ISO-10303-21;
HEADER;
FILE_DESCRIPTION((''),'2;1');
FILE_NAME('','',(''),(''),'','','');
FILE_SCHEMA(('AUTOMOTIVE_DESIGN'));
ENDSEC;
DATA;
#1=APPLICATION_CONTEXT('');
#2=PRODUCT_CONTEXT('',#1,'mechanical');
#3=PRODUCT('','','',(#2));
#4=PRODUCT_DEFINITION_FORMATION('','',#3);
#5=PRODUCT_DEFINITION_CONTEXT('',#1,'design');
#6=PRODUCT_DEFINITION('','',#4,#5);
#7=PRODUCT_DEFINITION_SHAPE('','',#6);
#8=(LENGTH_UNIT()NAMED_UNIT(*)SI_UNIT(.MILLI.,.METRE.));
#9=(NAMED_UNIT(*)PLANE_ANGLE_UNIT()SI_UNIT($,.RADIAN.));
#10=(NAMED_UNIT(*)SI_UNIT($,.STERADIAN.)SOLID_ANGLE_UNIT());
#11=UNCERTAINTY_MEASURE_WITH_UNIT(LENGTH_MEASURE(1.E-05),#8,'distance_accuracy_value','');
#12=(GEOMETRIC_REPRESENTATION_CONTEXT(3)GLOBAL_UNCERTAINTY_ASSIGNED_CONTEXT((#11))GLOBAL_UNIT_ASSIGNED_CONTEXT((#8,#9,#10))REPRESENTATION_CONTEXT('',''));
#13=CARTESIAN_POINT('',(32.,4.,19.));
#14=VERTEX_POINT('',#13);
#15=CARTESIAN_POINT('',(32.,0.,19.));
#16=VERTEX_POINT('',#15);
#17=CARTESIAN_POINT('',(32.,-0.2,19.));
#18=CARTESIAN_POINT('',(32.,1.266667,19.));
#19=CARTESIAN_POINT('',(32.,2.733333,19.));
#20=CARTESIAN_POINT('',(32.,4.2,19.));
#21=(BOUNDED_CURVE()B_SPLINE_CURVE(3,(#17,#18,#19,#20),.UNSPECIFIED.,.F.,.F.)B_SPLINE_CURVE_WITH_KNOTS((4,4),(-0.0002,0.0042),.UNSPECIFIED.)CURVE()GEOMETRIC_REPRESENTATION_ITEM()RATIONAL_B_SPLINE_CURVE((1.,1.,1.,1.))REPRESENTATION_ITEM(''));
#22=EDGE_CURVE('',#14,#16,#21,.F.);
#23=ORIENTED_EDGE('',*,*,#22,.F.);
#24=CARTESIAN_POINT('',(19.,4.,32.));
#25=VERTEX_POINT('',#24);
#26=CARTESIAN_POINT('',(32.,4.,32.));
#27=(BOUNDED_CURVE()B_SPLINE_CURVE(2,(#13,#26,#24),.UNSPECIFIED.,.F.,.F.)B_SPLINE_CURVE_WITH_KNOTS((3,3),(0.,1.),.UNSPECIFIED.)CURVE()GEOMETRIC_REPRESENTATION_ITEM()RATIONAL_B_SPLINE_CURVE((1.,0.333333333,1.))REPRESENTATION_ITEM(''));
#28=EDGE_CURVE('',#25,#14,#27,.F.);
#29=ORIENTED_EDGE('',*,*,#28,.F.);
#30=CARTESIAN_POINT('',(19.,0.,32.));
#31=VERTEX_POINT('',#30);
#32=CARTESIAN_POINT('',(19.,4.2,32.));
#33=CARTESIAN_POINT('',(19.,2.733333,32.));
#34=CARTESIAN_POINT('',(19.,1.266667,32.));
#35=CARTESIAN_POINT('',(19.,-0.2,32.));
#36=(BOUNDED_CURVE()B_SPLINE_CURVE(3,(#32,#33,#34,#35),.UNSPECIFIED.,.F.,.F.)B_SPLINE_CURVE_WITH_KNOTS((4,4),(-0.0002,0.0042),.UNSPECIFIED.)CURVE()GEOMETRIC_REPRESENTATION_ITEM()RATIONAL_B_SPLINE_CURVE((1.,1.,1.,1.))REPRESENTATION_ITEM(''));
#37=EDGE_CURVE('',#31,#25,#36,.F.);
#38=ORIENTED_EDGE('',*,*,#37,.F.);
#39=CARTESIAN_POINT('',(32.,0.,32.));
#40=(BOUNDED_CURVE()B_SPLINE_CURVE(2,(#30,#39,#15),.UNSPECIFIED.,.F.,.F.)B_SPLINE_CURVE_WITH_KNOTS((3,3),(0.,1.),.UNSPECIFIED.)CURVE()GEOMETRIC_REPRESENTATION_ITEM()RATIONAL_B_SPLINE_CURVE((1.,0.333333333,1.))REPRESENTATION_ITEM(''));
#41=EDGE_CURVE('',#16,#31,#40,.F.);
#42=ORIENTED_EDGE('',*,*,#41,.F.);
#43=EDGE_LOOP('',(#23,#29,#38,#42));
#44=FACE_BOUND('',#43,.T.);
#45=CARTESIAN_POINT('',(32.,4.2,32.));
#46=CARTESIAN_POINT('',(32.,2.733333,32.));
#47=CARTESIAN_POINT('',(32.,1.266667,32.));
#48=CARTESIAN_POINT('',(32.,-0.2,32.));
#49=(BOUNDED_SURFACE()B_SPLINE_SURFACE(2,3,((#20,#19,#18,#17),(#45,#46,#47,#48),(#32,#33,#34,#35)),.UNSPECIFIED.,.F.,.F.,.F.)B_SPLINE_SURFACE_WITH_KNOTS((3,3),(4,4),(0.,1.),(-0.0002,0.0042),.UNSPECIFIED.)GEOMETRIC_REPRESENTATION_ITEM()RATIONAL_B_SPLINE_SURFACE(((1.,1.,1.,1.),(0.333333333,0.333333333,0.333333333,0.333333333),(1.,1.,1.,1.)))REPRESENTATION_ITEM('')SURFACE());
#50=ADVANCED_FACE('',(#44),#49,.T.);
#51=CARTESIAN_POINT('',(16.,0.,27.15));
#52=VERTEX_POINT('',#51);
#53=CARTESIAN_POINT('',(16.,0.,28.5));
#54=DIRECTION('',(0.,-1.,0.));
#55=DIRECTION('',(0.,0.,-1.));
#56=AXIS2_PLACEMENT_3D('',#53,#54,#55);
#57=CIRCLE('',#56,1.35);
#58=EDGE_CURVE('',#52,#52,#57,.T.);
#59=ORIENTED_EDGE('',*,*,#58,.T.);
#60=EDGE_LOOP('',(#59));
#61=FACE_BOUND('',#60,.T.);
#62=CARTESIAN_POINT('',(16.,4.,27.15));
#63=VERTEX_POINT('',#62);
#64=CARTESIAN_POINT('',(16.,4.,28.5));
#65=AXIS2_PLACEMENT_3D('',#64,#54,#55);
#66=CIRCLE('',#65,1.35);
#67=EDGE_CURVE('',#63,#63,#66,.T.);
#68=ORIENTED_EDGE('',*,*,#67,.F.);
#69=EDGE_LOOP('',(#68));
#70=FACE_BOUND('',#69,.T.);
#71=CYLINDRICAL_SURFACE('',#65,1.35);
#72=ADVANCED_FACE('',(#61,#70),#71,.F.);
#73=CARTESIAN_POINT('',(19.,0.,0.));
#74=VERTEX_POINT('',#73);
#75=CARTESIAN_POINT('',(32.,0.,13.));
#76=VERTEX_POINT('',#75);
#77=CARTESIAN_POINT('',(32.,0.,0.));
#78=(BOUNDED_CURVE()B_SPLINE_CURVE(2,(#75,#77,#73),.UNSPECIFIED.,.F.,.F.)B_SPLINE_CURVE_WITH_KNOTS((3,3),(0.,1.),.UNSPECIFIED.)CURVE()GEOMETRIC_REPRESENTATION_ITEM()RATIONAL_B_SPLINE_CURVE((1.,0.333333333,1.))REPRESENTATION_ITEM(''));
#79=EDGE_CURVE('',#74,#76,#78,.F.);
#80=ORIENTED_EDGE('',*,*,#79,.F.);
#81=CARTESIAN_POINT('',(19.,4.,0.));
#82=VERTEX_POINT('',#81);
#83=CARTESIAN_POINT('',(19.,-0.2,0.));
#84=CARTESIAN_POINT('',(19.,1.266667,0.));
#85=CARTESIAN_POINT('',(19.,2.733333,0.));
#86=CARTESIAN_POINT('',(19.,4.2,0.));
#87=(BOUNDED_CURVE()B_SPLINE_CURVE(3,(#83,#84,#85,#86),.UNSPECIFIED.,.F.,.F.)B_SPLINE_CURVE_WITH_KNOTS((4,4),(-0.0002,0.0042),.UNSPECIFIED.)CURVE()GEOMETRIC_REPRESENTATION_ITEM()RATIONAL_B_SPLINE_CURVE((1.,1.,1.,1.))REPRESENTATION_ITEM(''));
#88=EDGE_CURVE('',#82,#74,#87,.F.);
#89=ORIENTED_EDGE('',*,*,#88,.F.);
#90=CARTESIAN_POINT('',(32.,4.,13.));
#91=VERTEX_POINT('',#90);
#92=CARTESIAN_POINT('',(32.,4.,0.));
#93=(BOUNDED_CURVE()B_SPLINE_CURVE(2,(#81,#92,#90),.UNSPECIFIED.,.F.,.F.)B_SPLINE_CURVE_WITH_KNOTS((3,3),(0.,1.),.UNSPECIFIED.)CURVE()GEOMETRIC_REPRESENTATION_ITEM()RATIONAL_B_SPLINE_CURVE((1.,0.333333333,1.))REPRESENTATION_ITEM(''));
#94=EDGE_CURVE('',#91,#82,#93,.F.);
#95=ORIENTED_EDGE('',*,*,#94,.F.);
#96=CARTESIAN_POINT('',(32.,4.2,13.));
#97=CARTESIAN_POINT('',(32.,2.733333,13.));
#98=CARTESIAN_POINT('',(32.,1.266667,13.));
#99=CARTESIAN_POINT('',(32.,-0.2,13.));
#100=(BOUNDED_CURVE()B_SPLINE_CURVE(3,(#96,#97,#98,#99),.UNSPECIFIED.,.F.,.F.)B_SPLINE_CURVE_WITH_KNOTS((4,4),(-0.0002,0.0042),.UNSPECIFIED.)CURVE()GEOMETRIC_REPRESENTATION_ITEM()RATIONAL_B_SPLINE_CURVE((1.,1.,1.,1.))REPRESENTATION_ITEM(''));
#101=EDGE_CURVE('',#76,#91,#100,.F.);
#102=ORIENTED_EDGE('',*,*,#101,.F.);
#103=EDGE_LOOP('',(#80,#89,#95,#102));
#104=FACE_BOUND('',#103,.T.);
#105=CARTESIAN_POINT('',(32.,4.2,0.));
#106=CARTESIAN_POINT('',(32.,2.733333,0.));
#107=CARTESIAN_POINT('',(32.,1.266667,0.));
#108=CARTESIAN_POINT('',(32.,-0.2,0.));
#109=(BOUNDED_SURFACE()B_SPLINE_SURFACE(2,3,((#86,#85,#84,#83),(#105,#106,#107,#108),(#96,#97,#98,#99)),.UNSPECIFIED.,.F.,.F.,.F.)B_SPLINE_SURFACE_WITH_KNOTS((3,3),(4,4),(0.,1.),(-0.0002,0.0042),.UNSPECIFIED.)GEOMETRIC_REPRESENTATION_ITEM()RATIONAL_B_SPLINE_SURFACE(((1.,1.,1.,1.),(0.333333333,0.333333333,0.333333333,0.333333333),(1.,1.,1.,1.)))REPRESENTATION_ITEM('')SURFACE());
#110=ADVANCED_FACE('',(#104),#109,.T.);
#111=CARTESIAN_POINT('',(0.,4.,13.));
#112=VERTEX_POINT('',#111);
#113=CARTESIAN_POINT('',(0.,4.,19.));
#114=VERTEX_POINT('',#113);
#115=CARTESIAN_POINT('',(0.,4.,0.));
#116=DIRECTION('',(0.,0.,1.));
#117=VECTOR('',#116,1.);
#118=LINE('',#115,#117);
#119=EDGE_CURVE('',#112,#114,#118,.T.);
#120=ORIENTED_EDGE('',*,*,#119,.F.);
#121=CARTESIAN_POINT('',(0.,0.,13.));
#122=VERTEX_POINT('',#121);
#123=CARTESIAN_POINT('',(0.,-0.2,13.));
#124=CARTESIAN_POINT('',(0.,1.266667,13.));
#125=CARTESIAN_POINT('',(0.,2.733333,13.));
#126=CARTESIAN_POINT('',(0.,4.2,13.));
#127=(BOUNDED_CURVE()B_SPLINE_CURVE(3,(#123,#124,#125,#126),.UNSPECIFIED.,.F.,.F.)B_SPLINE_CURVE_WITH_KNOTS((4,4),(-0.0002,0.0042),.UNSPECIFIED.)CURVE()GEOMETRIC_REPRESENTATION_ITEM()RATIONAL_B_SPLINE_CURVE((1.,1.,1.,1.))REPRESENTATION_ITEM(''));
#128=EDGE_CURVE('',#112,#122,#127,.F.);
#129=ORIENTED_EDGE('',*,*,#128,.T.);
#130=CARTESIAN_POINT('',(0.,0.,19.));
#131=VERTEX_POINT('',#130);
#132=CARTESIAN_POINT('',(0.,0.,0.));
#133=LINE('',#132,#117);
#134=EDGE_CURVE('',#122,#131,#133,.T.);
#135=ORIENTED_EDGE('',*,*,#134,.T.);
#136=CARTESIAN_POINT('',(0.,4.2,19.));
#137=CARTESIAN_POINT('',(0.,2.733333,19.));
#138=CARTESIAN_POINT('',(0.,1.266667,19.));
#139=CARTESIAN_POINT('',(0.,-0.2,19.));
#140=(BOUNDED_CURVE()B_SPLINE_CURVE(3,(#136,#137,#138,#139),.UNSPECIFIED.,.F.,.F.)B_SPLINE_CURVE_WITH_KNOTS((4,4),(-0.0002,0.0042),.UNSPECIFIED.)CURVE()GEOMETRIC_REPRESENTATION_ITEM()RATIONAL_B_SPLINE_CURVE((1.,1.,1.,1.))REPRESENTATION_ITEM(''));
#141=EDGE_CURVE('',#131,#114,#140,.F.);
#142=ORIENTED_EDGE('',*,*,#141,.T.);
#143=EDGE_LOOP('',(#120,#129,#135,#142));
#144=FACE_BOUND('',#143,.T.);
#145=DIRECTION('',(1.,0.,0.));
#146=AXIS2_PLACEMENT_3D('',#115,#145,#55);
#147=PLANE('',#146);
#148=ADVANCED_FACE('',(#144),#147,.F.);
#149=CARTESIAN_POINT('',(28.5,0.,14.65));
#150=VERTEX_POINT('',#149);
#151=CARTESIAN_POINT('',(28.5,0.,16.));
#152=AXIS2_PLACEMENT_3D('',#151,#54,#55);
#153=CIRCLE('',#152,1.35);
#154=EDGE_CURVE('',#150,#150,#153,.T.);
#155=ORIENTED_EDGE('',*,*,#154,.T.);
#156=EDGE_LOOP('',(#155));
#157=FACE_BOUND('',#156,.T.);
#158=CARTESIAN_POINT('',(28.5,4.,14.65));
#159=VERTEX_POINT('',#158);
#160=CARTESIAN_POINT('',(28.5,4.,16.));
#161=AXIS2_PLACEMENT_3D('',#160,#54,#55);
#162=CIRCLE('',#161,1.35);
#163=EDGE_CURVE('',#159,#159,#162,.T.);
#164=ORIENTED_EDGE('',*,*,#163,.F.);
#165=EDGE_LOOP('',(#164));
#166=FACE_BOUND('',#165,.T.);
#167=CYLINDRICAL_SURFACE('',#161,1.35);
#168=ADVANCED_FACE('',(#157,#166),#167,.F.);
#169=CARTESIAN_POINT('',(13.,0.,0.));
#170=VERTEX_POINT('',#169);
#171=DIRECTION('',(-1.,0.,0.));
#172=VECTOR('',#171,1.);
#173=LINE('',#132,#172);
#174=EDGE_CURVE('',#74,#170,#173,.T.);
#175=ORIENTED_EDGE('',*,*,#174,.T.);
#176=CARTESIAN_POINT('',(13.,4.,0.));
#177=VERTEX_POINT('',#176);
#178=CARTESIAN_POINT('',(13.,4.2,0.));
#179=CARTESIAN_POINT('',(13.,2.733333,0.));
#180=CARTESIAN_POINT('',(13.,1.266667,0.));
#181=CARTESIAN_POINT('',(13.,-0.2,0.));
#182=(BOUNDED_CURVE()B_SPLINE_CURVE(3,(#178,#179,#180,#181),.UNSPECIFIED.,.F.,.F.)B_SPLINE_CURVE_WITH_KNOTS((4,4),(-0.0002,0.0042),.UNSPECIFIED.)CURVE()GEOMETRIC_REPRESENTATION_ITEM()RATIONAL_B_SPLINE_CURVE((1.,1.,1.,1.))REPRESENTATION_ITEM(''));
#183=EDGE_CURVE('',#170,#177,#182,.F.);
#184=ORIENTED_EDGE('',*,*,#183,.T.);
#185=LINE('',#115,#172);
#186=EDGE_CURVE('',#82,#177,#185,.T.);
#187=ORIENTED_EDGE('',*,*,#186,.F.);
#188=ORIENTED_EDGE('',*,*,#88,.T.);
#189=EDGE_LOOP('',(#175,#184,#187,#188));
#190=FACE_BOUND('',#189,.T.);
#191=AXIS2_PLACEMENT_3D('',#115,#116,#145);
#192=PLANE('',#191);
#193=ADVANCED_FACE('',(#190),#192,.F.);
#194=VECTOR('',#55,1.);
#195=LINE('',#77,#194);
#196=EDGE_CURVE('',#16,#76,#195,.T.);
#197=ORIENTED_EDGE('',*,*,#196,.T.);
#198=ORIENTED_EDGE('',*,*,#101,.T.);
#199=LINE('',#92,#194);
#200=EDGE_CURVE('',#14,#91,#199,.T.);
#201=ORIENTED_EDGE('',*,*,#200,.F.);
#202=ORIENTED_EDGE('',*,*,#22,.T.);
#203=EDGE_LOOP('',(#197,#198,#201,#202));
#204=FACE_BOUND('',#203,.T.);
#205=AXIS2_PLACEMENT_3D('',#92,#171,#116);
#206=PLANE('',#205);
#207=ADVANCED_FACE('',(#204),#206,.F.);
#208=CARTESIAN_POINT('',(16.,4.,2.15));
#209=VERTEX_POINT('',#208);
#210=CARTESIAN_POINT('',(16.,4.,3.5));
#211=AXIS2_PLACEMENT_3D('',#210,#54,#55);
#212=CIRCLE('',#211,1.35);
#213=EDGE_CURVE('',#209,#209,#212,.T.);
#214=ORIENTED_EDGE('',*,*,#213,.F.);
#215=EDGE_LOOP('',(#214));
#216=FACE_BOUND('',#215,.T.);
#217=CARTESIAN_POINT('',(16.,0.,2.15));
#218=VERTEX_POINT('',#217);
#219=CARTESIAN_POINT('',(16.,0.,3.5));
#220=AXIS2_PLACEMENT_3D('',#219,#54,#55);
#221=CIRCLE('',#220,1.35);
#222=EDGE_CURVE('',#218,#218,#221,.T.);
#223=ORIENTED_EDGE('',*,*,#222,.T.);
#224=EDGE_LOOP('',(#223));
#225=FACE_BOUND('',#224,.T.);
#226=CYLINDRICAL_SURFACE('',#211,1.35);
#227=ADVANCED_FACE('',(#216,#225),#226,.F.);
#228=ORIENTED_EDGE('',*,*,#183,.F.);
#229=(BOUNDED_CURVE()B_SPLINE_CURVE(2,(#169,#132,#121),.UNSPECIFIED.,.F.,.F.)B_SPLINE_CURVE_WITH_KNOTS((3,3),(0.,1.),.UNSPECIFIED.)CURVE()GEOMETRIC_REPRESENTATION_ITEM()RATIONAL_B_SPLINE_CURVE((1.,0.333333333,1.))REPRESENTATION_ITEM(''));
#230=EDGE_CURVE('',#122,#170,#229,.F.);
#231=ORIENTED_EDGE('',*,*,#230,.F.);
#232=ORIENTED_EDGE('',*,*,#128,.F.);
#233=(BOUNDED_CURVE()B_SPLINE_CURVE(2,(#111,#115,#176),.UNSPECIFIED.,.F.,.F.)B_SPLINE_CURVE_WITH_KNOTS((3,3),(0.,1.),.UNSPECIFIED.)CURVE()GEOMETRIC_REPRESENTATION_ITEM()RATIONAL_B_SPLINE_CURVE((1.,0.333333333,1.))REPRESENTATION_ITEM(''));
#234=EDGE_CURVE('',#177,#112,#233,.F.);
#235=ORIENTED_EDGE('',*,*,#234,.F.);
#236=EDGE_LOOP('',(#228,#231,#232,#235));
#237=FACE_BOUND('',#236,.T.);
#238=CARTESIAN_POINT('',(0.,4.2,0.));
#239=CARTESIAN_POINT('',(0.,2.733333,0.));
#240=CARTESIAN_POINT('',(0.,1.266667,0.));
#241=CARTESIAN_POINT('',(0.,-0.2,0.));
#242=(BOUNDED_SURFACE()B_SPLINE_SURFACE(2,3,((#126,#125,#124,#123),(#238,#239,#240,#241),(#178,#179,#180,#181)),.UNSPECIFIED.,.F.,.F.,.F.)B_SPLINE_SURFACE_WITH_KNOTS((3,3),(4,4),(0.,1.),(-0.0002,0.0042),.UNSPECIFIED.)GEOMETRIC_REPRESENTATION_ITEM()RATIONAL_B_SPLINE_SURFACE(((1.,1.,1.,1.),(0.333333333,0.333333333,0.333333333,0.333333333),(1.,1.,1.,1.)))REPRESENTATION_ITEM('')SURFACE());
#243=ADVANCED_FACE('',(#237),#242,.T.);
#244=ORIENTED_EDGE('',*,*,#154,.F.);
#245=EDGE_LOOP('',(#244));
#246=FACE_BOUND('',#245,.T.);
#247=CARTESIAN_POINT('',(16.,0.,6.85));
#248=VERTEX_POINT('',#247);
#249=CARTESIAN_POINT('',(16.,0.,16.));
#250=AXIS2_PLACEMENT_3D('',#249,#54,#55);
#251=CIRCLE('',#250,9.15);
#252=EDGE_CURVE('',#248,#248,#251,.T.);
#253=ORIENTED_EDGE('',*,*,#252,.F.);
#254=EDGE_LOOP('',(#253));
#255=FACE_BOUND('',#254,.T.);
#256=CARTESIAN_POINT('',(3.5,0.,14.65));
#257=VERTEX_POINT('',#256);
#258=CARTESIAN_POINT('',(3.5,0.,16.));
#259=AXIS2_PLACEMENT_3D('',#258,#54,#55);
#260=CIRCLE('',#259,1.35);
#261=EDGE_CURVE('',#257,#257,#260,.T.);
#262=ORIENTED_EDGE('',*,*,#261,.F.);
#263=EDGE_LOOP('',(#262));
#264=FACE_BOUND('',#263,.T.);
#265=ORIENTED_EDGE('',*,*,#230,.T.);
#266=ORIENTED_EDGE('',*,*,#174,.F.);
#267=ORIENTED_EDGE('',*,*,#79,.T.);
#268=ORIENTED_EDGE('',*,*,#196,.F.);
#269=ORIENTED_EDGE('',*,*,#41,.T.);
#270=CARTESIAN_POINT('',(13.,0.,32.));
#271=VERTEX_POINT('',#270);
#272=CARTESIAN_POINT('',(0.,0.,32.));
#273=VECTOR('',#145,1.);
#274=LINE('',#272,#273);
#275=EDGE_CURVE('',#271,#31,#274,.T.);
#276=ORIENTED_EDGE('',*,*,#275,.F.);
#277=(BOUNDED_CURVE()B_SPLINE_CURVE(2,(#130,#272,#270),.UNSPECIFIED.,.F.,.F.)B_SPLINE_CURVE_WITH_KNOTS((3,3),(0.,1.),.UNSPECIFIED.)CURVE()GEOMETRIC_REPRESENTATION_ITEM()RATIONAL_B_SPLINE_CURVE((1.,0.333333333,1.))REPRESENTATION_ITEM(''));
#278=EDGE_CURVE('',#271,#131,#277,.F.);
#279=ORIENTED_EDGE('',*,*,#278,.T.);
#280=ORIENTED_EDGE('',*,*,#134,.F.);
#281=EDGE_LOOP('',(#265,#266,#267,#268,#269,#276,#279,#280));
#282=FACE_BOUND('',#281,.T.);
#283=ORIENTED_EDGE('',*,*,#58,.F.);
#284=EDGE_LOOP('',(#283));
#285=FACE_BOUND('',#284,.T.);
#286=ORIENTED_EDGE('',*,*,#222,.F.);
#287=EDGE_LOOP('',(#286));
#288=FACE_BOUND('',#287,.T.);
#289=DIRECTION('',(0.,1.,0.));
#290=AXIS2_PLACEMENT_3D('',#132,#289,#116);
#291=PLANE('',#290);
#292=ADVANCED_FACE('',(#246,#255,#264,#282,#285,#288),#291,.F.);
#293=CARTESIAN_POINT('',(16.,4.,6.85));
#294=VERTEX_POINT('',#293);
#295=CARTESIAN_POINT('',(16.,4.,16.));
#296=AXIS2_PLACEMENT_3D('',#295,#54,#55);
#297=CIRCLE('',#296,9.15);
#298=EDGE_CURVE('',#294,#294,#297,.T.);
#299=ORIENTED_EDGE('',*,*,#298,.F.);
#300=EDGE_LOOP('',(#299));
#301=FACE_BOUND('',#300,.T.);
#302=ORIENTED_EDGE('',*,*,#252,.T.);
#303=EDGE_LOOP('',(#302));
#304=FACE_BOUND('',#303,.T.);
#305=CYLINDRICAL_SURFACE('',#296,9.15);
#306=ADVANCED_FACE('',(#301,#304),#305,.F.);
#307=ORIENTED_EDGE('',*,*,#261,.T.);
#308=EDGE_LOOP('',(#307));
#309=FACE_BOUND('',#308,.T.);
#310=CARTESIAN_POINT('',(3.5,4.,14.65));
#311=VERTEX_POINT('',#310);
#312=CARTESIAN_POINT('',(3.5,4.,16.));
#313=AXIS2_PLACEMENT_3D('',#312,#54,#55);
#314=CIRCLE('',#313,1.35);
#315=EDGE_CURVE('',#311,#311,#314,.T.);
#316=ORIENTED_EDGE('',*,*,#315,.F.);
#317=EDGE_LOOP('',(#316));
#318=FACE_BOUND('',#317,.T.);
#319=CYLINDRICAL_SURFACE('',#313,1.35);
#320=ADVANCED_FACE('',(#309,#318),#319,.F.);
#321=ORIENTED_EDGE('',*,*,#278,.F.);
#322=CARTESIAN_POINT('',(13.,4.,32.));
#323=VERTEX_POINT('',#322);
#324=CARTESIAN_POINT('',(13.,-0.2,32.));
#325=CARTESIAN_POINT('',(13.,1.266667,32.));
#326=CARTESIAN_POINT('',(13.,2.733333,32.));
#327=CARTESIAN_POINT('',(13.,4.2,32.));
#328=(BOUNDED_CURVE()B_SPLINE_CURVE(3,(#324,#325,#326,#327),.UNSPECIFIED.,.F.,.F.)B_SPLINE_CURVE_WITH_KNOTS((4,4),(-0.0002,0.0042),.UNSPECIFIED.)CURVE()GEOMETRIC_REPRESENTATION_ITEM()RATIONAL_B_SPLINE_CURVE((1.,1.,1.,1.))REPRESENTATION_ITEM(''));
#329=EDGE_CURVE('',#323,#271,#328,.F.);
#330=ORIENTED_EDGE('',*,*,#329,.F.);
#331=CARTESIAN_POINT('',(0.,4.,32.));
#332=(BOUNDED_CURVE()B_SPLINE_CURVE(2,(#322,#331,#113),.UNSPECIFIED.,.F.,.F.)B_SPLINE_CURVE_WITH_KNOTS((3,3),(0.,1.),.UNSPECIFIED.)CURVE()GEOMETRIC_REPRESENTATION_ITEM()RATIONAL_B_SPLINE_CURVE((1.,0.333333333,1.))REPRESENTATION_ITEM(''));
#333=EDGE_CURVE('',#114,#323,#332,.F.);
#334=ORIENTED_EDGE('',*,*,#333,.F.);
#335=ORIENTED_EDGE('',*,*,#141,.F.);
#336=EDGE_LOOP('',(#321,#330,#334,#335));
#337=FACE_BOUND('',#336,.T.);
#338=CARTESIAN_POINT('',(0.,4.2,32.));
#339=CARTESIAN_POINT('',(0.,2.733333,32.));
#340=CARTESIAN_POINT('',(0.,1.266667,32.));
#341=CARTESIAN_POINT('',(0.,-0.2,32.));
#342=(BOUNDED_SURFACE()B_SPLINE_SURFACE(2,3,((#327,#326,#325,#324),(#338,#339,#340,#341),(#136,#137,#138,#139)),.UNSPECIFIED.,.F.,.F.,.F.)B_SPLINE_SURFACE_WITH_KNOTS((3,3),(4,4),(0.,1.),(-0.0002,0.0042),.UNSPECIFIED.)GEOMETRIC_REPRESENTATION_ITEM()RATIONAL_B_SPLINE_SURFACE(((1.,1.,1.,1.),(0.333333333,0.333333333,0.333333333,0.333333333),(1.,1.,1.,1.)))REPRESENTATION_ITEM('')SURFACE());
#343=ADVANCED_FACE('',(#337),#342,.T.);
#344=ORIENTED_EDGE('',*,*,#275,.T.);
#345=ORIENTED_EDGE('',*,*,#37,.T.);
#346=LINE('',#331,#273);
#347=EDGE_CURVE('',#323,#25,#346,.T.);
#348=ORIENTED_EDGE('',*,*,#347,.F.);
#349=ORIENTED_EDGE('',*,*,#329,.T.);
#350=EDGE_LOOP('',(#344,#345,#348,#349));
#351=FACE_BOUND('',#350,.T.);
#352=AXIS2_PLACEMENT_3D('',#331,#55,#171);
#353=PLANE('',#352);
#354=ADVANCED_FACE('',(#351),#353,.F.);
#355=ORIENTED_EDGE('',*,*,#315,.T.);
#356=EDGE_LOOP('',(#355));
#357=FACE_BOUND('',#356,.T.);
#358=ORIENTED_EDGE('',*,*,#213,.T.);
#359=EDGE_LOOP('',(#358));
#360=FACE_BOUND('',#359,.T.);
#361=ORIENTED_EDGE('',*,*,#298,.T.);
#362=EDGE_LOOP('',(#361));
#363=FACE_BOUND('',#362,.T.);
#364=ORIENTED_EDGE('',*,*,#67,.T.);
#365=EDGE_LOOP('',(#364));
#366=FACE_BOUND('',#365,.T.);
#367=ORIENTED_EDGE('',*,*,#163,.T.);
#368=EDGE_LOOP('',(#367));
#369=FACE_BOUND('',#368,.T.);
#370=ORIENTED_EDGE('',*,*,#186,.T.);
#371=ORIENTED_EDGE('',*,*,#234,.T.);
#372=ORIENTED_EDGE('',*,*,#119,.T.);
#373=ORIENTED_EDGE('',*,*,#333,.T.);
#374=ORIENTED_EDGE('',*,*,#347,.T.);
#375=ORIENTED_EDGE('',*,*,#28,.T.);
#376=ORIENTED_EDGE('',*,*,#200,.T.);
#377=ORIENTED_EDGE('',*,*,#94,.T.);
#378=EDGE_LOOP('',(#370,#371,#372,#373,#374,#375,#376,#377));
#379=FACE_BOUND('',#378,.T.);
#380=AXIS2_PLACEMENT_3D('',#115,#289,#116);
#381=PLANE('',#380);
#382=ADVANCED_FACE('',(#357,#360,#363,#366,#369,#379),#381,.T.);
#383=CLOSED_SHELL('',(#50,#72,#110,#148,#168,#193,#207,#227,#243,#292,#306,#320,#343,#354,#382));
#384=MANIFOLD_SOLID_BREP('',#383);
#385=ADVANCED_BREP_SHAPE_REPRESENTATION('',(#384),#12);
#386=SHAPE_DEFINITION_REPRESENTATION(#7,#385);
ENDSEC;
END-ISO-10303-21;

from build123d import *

# Parameters (mm, degrees)
SKETCH1_W           = 32
SKETCH1_H           = 32
BOSS_EXTRUDE1_DEPTH = 4
SKETCH2_R           = 9.15
SKETCH2_R_2         = 1.35
CUT_EXTRUDE1_DEPTH  = 4
FILLET1_SIZE        = 13


with BuildPart() as part:
    # Sketch1 → Boss-Extrude1 (new body)
    with BuildSketch(Plane(origin=(0, 0, 0), x_dir=(1, 0, 0), z_dir=(0, 1, 0))):
        with Locations((16, -16)):
            Rectangle(SKETCH1_W, SKETCH1_H)
    extrude(amount=BOSS_EXTRUDE1_DEPTH)

    # Sketch2 → Cut-Extrude1 (cut)
    with BuildSketch(Plane(origin=(0, 0, 0), x_dir=(-1, 0, 0), z_dir=(0, -1, 0))):
        with Locations(Location((-16, -16, 0), (0, 0, 90))):
            Circle(SKETCH2_R)
        with Locations(Location((-16, -28.5, 0), (0, 0, 90))):
            Circle(SKETCH2_R_2)
        with Locations(Location((-28.5, -16, 0), (0, 0, 90))):
            Circle(SKETCH2_R_2)
        with Locations(Location((-16, -3.5, 0), (0, 0, 90))):
            Circle(SKETCH2_R_2)
        with Locations(Location((-3.5, -16, 0), (0, 0, 90))):
            Circle(SKETCH2_R_2)
    extrude(amount=-CUT_EXTRUDE1_DEPTH, mode=Mode.SUBTRACT)

    # Fillet1
    # a fillet whose section is not a circle: 13 mm, written as the material it takes off along each edge
    with BuildSketch(Plane(origin=(0, -32.5, 0), x_dir=(1, 0, 0), z_dir=(0, 1, 0)), Plane(origin=(0, -32.5, 32), x_dir=(0, 0, -1), z_dir=(0, 1, 0))) as fillet1_piece_1:
        with BuildLine():
            Bezier((FILLET1_SIZE, 0), (0, 0), (0, -FILLET1_SIZE), weights=[1, 0.333333333, 1])
            Line((0, -FILLET1_SIZE), (0, 0))
            Line((0, 0), (FILLET1_SIZE, 0))
        make_face()
    extrude(amount=69, mode=Mode.SUBTRACT)
    with BuildSketch(Plane(origin=(32, -32.5, 0), x_dir=(-1, 0, 0), z_dir=(0, 1, 0)), Plane(origin=(32, -32.5, 32), x_dir=(0, 0, -1), z_dir=(0, 1, 0))) as fillet1_piece_2:
        with BuildLine():
            Bezier((FILLET1_SIZE, 0), (0, 0), (0, FILLET1_SIZE), weights=[1, 0.333333333, 1])
            Line((0, FILLET1_SIZE), (0, 0))
            Line((0, 0), (FILLET1_SIZE, 0))
        make_face()
    extrude(amount=69, mode=Mode.SUBTRACT)


solid = part.part
